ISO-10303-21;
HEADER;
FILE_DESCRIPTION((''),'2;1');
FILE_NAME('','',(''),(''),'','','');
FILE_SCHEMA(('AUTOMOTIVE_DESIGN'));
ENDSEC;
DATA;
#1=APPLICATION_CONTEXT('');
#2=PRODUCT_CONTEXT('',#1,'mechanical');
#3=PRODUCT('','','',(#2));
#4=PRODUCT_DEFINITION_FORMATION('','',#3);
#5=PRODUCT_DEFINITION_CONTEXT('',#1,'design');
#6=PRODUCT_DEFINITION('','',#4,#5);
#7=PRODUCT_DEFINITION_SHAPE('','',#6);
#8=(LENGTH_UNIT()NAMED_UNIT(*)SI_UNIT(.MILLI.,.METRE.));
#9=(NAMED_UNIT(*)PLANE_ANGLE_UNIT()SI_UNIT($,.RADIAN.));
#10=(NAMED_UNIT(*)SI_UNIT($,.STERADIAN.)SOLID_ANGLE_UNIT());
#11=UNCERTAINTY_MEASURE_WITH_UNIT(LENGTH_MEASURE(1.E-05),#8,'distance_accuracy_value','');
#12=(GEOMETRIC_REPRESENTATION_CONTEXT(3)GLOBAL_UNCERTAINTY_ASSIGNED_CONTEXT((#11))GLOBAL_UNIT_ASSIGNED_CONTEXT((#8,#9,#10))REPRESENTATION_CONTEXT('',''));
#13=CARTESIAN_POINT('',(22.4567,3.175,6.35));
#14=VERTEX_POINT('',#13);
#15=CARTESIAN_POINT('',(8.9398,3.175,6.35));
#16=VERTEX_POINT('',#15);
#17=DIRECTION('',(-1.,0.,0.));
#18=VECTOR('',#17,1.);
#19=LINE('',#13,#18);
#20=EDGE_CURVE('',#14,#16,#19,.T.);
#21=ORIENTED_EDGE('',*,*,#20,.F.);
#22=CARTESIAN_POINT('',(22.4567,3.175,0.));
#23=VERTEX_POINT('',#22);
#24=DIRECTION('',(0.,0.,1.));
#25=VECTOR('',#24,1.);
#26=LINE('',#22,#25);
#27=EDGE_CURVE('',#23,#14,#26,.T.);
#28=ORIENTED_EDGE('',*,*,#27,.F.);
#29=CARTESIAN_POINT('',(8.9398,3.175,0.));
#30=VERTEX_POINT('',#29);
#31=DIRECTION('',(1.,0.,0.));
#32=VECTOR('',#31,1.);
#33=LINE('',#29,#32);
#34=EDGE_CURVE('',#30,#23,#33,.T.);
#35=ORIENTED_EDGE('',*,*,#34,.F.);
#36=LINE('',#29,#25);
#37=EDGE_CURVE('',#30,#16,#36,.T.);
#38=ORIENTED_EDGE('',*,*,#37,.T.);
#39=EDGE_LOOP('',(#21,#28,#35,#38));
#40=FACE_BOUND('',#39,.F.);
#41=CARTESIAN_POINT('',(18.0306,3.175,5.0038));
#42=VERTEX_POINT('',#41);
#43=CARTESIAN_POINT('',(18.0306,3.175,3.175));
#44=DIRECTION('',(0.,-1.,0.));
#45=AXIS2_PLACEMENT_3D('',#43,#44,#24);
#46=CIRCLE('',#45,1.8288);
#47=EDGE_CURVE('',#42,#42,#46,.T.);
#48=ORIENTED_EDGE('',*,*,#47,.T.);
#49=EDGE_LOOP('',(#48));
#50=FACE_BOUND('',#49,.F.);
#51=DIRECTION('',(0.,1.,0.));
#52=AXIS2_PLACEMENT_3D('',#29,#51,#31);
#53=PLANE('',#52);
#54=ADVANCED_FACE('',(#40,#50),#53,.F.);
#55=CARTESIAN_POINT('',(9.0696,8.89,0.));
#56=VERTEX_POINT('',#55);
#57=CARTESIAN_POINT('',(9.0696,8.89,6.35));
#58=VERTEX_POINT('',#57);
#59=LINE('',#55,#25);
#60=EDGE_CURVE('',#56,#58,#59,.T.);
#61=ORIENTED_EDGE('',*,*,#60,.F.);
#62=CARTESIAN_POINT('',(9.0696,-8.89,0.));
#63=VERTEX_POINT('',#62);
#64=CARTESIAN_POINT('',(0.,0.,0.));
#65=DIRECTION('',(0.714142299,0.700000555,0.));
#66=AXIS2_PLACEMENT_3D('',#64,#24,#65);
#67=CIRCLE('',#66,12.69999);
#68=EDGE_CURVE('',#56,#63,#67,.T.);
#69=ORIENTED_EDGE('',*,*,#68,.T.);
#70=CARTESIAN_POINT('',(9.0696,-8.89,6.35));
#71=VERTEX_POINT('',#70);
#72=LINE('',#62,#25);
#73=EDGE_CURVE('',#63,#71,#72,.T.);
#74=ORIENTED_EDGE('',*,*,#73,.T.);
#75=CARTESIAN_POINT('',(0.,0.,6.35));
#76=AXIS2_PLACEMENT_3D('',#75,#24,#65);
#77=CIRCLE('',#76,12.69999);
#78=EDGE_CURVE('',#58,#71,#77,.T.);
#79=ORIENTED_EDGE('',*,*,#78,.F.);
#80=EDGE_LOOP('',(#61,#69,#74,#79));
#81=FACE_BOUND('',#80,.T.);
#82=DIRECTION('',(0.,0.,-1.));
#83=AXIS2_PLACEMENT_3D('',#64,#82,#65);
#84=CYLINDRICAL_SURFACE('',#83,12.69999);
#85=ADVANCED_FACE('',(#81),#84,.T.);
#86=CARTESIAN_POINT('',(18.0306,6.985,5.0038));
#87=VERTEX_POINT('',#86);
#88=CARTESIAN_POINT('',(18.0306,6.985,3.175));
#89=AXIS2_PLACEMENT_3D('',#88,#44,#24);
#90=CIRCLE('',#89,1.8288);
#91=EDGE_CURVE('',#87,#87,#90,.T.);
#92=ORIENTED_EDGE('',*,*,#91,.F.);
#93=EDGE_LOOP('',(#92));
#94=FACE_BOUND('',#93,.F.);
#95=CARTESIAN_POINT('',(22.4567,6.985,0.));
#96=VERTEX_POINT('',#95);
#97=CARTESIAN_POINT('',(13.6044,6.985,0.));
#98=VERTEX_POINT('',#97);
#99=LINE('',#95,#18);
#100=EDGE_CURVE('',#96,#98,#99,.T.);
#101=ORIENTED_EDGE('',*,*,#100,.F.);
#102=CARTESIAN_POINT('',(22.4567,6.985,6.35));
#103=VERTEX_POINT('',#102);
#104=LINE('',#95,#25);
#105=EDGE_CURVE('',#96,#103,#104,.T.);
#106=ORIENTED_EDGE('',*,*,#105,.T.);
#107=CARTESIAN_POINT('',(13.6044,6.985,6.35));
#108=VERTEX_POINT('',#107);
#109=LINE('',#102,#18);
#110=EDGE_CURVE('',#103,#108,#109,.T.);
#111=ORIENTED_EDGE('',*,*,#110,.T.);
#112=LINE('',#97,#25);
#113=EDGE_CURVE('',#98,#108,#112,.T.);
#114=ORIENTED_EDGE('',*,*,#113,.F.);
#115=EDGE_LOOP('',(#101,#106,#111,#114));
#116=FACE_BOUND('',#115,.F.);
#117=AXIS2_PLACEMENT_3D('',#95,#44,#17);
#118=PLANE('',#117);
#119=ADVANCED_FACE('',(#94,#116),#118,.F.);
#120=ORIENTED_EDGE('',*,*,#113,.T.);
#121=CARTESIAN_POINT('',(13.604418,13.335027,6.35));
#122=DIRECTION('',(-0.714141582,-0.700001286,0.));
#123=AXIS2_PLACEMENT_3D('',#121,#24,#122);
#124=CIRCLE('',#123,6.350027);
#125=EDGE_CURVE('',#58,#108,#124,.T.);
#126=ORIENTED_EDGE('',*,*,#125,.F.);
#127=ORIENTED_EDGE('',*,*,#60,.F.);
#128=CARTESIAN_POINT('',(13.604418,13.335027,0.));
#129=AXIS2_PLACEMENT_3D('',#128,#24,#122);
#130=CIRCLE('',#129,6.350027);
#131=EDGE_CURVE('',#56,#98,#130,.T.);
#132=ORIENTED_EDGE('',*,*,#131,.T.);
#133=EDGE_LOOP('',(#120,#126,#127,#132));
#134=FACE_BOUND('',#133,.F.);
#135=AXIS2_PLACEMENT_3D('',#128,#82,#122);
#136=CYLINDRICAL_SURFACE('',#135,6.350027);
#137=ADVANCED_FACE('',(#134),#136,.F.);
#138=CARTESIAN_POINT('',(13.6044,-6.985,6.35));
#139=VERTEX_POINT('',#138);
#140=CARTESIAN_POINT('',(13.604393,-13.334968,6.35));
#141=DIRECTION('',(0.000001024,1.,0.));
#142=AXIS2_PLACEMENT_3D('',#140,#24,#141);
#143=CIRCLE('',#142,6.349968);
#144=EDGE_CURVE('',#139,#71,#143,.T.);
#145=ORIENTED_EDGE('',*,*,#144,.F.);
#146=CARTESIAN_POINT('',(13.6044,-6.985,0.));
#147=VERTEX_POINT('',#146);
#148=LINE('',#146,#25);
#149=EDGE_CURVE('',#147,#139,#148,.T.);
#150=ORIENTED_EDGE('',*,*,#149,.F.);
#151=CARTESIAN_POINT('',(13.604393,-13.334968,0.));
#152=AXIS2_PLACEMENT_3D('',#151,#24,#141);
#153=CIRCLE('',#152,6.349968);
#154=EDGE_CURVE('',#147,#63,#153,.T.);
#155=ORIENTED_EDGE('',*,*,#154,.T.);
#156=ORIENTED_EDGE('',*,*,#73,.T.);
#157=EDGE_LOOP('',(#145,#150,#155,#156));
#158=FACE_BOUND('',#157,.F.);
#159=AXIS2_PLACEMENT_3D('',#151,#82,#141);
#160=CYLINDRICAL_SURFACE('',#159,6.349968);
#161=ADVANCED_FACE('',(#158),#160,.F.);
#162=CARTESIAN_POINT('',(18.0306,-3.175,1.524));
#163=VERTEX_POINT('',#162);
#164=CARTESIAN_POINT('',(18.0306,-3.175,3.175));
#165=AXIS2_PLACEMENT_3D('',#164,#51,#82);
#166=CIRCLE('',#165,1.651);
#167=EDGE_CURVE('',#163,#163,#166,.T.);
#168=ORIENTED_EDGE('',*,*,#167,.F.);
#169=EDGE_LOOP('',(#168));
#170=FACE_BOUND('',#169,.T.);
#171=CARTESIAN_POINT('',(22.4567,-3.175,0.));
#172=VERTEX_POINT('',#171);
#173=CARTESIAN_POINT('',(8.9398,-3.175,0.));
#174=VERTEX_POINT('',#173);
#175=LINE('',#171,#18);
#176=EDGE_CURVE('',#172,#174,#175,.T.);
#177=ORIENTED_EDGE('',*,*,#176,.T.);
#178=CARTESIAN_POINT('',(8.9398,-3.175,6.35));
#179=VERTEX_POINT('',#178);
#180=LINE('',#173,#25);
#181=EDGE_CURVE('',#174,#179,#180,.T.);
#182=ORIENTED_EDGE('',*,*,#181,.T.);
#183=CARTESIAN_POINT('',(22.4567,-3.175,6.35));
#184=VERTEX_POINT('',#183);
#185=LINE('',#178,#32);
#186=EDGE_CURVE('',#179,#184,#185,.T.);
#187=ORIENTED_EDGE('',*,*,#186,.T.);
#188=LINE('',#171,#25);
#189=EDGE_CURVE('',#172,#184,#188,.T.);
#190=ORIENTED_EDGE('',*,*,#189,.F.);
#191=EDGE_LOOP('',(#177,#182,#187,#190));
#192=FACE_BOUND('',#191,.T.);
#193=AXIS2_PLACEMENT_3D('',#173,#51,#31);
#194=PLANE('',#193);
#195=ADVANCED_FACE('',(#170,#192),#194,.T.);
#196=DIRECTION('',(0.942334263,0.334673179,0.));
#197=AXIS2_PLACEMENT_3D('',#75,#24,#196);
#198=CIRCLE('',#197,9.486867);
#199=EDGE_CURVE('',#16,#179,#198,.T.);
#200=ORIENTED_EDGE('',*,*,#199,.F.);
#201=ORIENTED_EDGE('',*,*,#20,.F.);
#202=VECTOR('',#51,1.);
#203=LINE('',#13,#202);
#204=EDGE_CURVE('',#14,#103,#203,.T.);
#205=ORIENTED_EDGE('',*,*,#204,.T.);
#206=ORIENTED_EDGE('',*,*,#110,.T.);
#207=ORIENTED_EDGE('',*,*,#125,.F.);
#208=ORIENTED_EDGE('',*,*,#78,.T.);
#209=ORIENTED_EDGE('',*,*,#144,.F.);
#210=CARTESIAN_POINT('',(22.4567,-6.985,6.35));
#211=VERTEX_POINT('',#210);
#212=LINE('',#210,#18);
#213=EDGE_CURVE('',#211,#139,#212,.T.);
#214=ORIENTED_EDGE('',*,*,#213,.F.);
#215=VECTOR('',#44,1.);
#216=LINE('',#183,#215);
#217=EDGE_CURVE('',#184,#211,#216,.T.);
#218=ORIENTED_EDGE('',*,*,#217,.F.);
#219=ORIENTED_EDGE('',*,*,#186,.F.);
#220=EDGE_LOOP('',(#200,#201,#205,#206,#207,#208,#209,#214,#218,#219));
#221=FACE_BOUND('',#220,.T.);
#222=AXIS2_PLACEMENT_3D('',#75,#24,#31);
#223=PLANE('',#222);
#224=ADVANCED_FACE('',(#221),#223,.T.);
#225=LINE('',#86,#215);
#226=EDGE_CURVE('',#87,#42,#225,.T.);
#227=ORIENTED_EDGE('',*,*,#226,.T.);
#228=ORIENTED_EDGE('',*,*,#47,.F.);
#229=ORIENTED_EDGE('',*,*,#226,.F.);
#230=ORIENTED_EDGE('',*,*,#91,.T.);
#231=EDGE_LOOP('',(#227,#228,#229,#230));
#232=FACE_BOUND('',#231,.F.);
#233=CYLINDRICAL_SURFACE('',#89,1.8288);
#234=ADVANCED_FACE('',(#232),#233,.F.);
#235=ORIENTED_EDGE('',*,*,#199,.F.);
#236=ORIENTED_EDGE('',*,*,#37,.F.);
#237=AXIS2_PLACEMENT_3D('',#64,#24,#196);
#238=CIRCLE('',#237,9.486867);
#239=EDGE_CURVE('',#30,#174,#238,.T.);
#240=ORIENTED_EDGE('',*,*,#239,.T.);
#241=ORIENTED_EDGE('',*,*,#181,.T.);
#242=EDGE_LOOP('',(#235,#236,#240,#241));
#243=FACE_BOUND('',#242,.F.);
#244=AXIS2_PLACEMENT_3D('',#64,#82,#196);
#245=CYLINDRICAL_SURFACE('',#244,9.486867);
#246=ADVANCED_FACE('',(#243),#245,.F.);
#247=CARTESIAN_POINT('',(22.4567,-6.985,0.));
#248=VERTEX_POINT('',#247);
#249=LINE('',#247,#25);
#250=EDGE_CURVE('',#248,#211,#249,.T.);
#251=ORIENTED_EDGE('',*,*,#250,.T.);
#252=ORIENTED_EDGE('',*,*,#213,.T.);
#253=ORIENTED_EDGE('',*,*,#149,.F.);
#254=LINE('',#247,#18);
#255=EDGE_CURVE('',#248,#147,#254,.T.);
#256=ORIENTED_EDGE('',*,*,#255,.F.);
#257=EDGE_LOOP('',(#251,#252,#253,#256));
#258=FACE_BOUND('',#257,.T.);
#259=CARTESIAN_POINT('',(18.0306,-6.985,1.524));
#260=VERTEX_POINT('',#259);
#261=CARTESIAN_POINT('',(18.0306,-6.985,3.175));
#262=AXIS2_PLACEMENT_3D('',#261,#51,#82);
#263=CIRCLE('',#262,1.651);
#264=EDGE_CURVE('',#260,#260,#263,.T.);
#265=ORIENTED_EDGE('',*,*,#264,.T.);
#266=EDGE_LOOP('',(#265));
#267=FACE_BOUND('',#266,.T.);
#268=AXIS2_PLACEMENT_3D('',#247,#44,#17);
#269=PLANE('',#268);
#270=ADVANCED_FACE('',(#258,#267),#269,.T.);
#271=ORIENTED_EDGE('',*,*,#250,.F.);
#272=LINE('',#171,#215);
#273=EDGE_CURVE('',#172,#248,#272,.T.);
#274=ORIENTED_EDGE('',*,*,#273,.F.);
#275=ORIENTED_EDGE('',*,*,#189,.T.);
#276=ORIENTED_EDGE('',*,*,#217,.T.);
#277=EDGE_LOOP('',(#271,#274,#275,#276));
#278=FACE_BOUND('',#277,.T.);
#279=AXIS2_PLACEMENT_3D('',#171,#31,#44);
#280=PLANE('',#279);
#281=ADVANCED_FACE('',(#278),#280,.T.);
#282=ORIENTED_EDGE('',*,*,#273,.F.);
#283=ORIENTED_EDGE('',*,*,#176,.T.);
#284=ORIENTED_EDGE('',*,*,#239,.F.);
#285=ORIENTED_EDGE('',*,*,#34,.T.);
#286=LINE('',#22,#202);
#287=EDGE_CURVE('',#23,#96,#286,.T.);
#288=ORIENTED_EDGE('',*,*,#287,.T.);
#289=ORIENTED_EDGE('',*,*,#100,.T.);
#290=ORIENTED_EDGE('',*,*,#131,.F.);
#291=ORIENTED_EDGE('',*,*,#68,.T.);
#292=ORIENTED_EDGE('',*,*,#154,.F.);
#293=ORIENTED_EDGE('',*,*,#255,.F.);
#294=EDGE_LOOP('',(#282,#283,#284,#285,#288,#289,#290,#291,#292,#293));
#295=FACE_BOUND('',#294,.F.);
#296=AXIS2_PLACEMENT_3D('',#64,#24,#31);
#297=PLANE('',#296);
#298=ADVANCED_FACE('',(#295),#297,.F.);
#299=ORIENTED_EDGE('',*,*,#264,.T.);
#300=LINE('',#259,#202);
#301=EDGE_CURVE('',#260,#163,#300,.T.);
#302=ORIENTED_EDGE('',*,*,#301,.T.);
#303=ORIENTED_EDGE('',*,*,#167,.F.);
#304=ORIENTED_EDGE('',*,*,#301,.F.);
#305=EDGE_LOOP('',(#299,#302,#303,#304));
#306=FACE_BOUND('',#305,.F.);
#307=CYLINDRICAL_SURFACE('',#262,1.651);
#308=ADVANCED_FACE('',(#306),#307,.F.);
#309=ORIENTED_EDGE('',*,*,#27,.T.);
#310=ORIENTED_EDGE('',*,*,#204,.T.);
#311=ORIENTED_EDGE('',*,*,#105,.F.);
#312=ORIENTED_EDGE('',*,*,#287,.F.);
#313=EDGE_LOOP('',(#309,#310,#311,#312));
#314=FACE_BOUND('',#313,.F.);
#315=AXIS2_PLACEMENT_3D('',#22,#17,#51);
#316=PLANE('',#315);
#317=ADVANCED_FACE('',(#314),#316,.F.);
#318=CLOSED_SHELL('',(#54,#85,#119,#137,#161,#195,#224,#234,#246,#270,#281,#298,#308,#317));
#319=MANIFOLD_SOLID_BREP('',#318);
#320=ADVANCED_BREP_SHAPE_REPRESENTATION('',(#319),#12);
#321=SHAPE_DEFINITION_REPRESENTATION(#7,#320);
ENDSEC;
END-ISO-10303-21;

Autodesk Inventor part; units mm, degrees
ref_plane "YZ Plane" through (0, 0, 0) normal (1, 0, 0) x (0, 1, 0)
ref_plane "XZ Plane" through (0, 0, 0) normal (0, 1, 0) x (-1, 0, 0)
ref_plane "XY Plane" through (0, 0, 0) normal (0, 0, 1) x (1, 0, 0)
sketch "Sketch1" plane through (0, 0, 0) normal (0, 0, 1) x (1, 0, 0)
  arc A0 (8.9398, 3.175) -> (8.9398, -3.175) centre (0, 0) ccw
  arc A1 (9.0696, 8.89) -> (9.0696, -8.89) centre (0, 0) ccw
  line L0 (8.9398, 3.175) -> (12.2967, 3.175)
  line L1 (8.9398, -3.175) -> (12.2967, -3.175)
  line L2 (12.2967, 3.175) -> (22.4567, 3.175)
  line L3 (12.2967, -3.175) -> (22.4567, -3.175)
  line L4 (22.4567, 3.175) -> (22.4567, 6.985)
  line L5 (22.4567, 6.985) -> (13.6044, 6.985)
  line L6 (22.4567, -3.175) -> (22.4567, -6.985)
  line L7 (22.4567, -6.985) -> (13.6044, -6.985)
  line L8 (-18.034, 0) -> (28.275, 0) construction
  arc A2 (9.0696, 8.89) -> (13.6044, 6.985) centre (13.6044, 13.335) ccw
  arc A3 (13.6044, -6.985) -> (9.0696, -8.89) centre (13.6044, -13.335) ccw
  point P0 (10.6066, 6.985)
  point P1 (10.6066, -6.985)
  dimension "d0" = 18.9738
  dimension "d1" = 25.4
  dimension "d8" = 3.81
  dimension "d18" = 3.175
  dimension "d19" = 6.35
  dimension "d20" = 13.5169
  dimension "d21" = 8.8523
extrude "Extrusion1" add sketch "Sketch1" along normal blind 6.35
sketch "Sketch2" plane through (13.6044, 6.985, 0) normal (0, 1, 0) x (1, 0, 0)
  line L0 (0, 0) -> (8.8523, 0) projected
  line L1 (8.8523, -6.35) -> (0, -6.35) projected
  line L2 (4.4262, -6.35) -> (4.4262, 0) construction
  point P0 (-13.6044, 0)
  point P1 (4.4262, -3.175)
hole "Hole1" at (18.0306, 6.985, 3.175) direction (0, -1, 0) diameter 3.6576 end up to surface clearance for "Flat Head Machine Screw (82)" size "#6" standard "Ansi Unified Screw Threads"
sketch "Sketch3" plane through (13.6044, -6.985, 0) normal (0, -1, 0) x (1, 0, 0)
  circle A0 centre (4.4262, 3.175) radius 1.8288 projected
  point P0 (-13.6044, 0)
hole "Hole2" at (18.0306, -6.985, 3.175) direction (0, 1, 0) diameter 3.302 end up to surface thread size "8-32 UNC" class "2B" standard "ANSI Unified Screw Threads"
properties part number "bearing_blcok"
